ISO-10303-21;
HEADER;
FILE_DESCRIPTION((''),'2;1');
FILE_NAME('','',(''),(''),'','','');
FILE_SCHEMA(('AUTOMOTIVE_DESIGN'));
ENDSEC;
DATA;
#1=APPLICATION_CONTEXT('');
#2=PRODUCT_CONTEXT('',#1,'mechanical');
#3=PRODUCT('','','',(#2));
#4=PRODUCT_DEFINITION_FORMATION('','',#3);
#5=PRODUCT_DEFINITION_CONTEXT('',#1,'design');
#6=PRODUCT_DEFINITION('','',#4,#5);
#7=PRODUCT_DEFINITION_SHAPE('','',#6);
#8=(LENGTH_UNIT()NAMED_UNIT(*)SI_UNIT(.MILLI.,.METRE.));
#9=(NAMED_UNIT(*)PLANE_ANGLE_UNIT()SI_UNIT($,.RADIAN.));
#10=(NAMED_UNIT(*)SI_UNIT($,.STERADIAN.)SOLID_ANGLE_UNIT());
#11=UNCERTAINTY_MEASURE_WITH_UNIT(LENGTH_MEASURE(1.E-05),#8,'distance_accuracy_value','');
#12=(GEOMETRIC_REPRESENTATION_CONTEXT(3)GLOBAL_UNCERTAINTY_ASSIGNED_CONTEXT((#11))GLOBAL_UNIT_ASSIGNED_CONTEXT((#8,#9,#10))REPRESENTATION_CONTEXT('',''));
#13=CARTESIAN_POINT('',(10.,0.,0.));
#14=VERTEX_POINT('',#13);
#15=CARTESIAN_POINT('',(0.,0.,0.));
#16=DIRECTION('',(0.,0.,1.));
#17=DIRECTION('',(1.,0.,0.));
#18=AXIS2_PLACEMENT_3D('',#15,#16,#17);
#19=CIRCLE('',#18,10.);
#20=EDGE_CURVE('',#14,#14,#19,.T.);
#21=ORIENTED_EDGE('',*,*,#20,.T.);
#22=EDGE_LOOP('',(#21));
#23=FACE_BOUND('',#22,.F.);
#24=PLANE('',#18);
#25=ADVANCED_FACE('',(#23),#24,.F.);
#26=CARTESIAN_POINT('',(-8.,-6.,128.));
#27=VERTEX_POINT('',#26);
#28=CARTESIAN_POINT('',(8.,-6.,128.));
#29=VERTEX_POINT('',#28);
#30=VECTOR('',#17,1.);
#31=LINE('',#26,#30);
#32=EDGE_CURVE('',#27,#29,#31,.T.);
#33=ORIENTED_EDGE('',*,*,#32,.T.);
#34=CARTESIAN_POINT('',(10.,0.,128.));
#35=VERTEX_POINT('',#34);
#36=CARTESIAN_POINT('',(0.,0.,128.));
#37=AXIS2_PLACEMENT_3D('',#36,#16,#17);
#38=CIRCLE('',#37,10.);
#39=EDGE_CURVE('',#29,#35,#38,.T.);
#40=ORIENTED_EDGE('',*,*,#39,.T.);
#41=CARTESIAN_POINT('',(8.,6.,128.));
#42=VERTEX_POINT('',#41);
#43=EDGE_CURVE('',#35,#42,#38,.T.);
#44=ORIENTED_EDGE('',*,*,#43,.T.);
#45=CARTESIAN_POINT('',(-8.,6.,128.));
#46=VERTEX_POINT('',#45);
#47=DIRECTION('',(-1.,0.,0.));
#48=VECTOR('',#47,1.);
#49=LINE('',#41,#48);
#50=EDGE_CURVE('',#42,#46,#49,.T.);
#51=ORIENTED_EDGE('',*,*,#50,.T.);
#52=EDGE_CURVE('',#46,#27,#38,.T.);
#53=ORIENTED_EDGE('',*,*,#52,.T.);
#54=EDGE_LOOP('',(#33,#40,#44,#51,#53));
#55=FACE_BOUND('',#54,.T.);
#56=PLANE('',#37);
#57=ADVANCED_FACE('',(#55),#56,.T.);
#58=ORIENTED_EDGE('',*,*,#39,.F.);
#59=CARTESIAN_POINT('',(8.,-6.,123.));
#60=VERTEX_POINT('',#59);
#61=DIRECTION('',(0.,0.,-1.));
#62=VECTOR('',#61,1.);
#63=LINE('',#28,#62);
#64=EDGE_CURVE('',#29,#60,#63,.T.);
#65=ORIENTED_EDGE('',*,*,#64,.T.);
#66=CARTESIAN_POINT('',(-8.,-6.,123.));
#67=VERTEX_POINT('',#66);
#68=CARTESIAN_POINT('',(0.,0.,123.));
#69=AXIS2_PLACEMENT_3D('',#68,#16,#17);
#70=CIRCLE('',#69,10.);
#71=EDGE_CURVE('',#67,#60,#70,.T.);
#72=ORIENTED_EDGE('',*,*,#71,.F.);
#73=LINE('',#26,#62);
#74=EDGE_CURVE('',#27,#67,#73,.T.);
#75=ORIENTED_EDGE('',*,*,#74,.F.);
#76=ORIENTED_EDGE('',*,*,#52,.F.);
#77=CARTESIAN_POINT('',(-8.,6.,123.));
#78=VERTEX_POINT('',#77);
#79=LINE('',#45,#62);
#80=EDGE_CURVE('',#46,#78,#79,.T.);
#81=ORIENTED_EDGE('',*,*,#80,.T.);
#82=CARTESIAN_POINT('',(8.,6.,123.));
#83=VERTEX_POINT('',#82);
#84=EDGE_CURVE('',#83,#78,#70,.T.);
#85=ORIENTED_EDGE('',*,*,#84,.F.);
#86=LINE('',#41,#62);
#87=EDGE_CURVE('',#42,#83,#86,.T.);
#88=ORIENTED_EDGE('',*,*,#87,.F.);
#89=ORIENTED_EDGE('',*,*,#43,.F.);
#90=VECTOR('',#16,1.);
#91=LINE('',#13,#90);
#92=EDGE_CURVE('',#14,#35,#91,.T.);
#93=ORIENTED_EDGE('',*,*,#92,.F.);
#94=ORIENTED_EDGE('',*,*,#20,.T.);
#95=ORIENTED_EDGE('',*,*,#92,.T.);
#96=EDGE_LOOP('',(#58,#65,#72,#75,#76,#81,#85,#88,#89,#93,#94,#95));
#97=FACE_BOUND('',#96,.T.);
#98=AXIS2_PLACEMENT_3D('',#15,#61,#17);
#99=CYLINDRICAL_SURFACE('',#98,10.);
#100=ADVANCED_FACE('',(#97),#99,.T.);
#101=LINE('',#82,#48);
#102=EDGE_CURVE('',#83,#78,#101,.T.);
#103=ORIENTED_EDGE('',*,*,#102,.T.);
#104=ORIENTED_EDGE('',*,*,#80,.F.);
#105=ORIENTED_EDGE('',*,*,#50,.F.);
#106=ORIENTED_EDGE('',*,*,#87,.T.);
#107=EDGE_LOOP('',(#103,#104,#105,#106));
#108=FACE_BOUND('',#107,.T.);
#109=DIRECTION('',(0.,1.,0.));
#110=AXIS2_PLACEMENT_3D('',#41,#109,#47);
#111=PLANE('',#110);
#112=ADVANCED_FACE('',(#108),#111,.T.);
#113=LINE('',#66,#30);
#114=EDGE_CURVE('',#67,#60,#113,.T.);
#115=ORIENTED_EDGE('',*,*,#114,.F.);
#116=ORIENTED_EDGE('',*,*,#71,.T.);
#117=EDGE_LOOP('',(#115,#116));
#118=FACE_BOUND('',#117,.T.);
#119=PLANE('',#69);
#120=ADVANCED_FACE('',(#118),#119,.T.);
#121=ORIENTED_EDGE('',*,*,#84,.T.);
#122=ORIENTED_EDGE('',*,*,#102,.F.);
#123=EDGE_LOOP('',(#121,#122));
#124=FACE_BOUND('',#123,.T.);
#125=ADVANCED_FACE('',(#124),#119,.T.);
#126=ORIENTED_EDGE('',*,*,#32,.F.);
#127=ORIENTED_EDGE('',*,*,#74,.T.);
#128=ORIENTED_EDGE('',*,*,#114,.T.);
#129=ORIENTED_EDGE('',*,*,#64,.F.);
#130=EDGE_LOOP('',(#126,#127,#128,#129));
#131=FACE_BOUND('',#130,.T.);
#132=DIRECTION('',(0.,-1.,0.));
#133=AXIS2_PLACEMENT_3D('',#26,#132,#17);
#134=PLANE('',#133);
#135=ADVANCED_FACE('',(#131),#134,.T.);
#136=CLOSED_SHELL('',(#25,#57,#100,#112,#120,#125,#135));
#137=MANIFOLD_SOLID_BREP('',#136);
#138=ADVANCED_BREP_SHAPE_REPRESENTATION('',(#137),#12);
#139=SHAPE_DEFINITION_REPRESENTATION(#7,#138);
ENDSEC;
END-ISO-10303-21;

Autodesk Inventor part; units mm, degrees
ref_plane "YZ Plane" through (0, 0, 0) normal (1, 0, 0) x (0, 1, 0)
ref_plane "XZ Plane" through (0, 0, 0) normal (0, 1, 0) x (-1, 0, 0)
ref_plane "XY Plane" through (0, 0, 0) normal (0, 0, 1) x (1, 0, 0)
sketch "Эскиз1" plane through (0, 0, 0) normal (0, 0, 1) x (1, 0, 0)
  circle A0 centre (0, 0) radius 10
  dimension "d0" = 20
extrude "Выдавливание1" add sketch "Эскиз1" along normal blind 128
sketch "Эскиз2" plane through (0, 0, 128) normal (0, 0, 1) x (1, 0, 0)
  circle A0 centre (0, 0) radius 10 projected
  line L0 (8, 6) -> (-8, 6)
  line L1 (-8, -6) -> (8, -6)
  dimension "d3" = 12
extrude "Выдавливание2" cut sketch "Эскиз2" against normal blind 5 contours L0 A0 | A0 L1
equation "\"d0\" = d_main_shaft"
equation "\"d3\" = width_flattened_surface"
equation "\"d_main_shaft\" = 20"
equation "\"tolerance_plazma\" = 0.1"
equation "\"thickness_steel\" = 3"
equation "\"d_main_screw_holes\" = 6.1"
equation "\"thickness_profile_tibea\" = 3"
equation "\"thickness_profile_femur\" = 3"
equation "\"width_flattened_surface\" = 12"
equation "\"width_shaft_shift\" = 35"
equation "\"hight_shaft_shift\" = 37"
properties part number "shaft_tibea" material "Сталь 09Г2С"
